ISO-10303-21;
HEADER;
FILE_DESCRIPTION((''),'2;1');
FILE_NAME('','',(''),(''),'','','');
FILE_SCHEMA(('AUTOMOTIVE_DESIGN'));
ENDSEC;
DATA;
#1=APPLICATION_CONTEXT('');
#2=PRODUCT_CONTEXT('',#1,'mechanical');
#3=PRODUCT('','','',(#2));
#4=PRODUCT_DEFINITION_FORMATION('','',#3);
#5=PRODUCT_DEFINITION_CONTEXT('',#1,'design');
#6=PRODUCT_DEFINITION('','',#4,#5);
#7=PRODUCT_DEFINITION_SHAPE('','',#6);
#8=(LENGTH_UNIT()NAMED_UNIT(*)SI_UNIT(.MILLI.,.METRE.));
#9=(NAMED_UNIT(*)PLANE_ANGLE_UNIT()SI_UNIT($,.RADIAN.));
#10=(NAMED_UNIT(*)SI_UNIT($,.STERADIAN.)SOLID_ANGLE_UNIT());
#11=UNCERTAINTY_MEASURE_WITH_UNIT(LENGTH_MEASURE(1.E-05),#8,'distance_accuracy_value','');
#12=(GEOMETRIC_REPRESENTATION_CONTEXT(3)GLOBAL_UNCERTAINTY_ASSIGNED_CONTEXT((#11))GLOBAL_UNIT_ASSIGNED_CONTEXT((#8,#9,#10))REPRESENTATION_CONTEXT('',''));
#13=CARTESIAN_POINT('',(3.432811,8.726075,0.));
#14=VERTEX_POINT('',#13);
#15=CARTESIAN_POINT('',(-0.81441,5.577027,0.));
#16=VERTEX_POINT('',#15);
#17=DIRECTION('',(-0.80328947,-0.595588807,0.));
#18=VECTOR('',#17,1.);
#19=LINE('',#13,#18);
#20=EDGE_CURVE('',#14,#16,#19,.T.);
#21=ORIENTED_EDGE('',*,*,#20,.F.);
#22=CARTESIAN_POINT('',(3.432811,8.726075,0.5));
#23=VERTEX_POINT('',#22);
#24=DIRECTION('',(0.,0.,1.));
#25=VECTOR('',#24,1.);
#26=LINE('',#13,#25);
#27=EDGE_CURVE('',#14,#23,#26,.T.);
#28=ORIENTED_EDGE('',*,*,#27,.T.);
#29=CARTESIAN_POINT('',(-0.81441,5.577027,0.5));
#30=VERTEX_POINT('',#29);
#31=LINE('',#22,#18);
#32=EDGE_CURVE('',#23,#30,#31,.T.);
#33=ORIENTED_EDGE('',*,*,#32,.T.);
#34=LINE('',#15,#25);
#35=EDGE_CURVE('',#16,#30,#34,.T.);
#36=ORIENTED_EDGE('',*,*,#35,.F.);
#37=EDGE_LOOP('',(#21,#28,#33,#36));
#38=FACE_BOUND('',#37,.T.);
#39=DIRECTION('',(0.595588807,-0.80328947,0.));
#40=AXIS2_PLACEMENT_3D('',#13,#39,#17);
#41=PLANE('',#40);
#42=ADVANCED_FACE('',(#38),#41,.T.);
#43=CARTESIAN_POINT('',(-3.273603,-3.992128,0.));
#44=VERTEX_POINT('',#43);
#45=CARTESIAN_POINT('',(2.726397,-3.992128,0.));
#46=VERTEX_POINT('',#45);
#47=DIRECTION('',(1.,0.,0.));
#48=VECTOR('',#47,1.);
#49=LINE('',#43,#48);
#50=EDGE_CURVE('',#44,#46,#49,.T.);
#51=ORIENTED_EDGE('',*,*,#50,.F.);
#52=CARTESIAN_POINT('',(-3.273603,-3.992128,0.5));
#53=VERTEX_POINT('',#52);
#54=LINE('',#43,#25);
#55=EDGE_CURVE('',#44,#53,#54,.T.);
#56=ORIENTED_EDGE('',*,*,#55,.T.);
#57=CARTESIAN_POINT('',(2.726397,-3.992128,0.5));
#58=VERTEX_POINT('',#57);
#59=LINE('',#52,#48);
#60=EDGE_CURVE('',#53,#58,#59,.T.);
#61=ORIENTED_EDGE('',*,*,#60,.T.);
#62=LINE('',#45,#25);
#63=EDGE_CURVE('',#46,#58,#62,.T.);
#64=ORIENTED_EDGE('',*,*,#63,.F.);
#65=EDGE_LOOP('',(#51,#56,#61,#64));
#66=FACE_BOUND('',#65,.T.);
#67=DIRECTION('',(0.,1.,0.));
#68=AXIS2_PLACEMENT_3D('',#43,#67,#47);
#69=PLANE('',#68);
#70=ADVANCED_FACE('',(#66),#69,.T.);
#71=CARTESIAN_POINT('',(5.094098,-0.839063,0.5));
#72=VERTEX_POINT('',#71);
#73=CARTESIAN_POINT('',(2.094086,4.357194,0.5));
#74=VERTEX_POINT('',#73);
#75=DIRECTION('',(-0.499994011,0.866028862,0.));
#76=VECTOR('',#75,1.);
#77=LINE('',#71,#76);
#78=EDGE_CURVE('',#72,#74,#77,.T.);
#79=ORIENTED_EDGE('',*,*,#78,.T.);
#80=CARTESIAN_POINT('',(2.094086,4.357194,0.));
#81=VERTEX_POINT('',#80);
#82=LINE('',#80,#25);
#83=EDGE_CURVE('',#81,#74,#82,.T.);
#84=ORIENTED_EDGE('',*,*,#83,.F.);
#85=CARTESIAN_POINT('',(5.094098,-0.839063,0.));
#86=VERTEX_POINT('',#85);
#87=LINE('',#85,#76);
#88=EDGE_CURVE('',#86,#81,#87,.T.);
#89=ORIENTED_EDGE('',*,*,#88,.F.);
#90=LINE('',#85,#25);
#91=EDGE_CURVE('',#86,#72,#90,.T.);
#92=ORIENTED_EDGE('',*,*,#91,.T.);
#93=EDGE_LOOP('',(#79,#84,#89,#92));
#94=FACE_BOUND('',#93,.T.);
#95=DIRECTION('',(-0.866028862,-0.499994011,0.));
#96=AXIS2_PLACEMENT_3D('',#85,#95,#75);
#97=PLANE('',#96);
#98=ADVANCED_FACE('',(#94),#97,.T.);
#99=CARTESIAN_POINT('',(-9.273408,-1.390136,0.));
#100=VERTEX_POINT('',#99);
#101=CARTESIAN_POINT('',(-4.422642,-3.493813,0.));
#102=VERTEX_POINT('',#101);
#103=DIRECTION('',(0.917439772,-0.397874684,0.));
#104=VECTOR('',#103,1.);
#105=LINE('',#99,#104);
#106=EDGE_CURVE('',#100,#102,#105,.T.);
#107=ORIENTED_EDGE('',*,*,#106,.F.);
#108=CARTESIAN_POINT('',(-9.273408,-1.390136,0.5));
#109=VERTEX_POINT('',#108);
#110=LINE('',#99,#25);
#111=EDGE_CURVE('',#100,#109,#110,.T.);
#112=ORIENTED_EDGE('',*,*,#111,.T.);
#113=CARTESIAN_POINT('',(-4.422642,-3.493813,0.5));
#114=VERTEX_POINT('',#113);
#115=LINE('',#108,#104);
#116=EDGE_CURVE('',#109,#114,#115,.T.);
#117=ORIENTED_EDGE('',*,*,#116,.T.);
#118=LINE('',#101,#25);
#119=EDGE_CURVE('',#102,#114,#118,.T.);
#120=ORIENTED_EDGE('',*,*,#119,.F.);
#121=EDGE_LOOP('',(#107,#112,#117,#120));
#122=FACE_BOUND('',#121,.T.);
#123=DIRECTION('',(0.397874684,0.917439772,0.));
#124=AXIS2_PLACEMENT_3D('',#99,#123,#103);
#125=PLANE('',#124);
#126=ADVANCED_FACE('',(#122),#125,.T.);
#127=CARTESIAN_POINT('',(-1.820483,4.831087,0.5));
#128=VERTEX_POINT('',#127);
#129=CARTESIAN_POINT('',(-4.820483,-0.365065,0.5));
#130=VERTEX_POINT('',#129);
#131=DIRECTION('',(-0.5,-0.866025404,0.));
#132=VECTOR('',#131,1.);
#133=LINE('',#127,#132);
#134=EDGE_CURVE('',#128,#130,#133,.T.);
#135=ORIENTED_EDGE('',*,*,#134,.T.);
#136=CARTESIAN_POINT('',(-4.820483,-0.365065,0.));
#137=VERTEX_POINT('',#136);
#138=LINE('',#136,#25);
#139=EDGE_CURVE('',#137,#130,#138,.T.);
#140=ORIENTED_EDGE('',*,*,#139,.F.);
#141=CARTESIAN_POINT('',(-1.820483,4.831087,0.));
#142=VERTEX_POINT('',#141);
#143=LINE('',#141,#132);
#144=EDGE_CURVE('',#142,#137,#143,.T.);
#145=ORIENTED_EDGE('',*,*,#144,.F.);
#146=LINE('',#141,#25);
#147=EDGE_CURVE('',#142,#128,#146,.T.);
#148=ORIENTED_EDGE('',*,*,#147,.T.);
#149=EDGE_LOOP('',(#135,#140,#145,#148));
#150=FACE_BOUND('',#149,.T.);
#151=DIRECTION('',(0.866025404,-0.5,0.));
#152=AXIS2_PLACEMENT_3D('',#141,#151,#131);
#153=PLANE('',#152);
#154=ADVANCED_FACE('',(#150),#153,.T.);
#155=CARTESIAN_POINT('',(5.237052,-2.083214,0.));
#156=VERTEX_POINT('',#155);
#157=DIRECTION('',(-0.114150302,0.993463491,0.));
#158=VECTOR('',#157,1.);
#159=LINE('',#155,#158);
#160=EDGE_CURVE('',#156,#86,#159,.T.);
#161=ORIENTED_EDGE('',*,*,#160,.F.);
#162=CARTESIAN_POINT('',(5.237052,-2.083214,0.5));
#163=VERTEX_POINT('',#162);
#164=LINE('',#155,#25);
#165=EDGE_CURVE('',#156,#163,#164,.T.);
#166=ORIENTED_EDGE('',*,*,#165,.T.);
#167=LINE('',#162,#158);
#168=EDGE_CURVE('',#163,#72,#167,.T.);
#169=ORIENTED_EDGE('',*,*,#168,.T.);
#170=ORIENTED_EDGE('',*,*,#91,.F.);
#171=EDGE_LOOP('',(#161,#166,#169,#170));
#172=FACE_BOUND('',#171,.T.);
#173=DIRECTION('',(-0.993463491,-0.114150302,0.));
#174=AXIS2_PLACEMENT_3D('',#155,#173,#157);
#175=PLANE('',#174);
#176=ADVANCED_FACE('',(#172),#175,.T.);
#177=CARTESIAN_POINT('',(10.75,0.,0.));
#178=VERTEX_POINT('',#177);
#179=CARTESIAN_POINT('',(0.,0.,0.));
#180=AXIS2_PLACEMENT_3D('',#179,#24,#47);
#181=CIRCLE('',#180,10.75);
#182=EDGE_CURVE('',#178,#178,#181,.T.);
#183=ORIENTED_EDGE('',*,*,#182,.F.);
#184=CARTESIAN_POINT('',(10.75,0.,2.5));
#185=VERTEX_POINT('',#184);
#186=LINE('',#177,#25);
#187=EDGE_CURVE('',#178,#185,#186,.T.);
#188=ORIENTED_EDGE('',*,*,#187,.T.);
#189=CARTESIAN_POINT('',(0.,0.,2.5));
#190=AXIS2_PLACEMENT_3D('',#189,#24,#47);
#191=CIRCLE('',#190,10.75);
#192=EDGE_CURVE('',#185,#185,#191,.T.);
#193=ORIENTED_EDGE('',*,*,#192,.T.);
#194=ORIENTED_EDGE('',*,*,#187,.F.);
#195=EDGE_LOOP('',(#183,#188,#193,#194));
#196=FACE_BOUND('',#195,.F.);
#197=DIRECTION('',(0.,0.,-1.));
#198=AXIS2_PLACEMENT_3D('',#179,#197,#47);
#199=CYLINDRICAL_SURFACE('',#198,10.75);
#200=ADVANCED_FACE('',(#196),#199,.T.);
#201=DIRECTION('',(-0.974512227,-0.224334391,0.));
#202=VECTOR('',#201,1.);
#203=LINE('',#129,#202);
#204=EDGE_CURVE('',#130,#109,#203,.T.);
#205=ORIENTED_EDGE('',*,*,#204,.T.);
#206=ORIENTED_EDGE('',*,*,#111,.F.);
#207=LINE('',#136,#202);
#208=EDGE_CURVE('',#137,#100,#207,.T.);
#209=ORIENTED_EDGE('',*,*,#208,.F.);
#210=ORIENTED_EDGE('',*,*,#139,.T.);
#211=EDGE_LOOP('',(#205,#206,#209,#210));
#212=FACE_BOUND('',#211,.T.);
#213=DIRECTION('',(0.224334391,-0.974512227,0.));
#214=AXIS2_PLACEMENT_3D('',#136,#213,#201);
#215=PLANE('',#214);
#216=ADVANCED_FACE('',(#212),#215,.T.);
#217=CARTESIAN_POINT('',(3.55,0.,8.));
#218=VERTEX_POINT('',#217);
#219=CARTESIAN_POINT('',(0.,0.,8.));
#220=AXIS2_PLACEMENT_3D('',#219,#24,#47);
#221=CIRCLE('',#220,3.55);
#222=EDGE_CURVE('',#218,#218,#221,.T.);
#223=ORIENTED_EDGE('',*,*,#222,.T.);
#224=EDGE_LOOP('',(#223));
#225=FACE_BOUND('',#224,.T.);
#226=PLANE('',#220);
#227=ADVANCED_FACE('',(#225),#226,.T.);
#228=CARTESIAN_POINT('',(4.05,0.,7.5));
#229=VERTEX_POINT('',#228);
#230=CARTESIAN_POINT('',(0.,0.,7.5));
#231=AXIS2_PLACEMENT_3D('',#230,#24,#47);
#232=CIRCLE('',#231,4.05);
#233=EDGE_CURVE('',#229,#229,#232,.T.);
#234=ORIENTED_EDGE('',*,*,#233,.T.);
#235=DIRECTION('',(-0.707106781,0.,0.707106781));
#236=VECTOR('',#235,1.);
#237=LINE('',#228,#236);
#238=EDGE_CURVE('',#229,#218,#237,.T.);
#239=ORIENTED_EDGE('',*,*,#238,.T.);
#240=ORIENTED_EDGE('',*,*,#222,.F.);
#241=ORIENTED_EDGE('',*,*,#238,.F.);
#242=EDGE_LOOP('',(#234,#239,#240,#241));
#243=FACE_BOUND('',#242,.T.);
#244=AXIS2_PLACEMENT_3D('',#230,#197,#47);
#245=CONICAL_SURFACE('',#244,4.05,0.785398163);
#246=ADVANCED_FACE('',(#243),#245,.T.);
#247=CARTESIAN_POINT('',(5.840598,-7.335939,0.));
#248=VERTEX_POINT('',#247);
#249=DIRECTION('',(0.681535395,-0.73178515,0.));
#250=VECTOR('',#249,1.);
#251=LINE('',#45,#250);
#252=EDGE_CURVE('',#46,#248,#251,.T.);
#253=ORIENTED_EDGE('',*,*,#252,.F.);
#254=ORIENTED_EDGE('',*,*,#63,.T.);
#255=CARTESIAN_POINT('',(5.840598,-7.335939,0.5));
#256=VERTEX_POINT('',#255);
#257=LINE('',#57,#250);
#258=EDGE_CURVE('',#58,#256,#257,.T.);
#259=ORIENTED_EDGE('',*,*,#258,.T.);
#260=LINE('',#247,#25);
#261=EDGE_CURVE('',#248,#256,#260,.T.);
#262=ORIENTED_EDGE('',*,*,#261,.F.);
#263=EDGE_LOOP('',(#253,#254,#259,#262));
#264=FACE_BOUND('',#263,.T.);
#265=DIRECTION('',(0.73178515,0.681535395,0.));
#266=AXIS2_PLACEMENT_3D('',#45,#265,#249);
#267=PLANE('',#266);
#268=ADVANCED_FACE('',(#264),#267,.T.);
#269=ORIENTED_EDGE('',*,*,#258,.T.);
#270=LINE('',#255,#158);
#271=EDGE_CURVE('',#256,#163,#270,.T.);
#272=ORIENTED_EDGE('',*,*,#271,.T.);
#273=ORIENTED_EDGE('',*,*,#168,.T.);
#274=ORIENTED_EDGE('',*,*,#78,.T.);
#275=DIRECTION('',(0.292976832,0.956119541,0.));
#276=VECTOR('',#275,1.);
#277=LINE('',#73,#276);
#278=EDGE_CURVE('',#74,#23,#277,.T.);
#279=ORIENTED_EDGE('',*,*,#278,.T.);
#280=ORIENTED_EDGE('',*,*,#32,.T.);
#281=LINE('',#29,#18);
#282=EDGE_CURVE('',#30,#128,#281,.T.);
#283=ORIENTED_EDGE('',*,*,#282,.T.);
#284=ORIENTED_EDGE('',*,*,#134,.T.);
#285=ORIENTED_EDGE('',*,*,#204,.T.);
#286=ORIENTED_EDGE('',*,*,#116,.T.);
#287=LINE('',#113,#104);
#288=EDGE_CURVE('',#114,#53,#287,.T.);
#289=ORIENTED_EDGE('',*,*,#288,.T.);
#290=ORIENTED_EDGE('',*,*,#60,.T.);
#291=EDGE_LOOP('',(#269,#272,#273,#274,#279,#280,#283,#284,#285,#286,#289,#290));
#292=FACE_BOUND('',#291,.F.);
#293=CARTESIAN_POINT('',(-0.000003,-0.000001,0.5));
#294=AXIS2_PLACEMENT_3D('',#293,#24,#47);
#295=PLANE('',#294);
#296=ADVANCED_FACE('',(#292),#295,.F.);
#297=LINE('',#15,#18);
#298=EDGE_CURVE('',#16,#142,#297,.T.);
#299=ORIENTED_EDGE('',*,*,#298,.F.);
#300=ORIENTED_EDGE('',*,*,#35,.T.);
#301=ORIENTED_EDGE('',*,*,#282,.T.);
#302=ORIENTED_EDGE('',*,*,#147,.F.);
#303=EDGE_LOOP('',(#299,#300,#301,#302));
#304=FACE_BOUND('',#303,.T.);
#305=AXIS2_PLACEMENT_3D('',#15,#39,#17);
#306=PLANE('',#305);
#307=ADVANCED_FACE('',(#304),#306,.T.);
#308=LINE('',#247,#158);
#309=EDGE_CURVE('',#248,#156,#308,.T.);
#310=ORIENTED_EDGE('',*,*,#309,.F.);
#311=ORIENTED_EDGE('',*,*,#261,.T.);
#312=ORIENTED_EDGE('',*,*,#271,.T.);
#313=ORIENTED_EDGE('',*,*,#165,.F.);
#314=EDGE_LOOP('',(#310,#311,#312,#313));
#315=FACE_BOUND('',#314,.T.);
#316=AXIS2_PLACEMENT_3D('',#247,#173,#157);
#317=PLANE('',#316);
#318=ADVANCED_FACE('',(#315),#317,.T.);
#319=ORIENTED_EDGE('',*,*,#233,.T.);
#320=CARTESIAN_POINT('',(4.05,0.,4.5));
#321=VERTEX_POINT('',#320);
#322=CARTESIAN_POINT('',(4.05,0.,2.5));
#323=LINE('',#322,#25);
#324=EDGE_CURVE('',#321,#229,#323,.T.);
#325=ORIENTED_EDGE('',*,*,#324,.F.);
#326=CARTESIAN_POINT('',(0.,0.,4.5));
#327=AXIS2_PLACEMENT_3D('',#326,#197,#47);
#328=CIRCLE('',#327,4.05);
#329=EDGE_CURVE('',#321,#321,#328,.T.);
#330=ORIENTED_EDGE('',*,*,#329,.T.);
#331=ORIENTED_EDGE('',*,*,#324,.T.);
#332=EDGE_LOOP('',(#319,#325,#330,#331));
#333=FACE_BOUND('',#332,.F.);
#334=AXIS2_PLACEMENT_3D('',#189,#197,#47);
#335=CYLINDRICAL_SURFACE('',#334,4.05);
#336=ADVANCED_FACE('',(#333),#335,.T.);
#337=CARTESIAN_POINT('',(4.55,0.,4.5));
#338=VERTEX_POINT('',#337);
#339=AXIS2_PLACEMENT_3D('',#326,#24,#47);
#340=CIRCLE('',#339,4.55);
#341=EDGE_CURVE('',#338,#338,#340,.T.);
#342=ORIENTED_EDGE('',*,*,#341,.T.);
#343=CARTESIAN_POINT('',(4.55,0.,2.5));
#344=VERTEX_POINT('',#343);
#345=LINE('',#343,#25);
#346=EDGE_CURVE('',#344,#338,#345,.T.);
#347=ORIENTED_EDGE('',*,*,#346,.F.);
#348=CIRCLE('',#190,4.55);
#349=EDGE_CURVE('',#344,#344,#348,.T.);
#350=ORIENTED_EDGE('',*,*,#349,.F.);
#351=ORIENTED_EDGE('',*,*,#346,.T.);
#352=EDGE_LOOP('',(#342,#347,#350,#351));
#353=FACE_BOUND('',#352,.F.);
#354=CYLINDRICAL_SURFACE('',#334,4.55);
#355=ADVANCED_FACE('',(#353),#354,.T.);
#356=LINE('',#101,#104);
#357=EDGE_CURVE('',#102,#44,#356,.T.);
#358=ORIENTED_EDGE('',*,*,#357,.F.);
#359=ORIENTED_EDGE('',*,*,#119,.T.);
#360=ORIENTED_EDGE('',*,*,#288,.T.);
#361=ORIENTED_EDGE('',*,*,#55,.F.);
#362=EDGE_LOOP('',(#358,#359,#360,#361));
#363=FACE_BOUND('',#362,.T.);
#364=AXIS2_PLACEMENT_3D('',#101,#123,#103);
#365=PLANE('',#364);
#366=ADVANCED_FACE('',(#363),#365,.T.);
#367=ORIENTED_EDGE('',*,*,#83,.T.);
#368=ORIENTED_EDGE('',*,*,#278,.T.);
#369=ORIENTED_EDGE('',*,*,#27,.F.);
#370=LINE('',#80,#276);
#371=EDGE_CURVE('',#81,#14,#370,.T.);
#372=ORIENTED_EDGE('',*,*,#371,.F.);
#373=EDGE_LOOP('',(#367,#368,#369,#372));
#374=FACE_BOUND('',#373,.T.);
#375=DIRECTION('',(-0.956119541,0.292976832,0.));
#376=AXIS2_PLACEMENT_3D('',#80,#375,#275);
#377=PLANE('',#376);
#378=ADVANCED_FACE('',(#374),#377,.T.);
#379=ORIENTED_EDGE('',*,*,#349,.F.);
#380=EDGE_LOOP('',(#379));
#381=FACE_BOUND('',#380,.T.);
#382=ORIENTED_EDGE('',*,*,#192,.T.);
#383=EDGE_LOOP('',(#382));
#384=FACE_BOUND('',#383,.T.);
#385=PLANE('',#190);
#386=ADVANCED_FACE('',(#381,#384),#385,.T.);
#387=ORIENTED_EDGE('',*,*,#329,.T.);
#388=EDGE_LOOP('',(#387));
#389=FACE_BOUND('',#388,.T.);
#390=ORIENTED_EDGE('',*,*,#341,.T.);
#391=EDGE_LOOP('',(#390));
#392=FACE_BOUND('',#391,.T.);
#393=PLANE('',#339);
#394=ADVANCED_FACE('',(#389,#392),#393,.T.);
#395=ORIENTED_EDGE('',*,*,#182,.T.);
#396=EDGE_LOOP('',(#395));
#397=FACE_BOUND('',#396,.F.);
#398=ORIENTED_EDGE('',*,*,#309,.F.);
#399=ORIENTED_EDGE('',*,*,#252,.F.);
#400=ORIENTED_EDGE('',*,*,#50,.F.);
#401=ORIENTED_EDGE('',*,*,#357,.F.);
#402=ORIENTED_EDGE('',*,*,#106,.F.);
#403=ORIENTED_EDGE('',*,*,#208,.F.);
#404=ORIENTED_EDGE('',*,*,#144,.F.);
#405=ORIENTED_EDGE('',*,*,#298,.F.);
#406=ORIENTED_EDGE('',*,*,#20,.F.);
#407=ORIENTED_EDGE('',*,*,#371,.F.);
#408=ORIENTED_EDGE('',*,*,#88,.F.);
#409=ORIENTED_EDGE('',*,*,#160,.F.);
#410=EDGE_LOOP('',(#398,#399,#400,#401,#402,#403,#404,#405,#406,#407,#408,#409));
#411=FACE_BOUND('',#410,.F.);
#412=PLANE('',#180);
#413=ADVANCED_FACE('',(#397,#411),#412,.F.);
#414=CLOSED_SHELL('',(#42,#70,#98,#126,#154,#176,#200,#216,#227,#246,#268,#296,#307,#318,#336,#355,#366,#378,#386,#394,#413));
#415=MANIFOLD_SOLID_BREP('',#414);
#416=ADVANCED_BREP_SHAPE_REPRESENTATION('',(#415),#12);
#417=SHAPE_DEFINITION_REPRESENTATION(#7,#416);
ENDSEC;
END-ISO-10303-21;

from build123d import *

# Parameters (mm, degrees)
F0_R     = 10.75
F0_R_2   = 10
F1_DEPTH = 2.5
F2_R     = 4.05
F3_DEPTH = 5.5
F4_SIZE  = 0.5
F5_R     = 4.55
F6_DEPTH = 2
F7_DEPTH = 0.5


# Not quite as in the source:
# - a feature names something its author has since deleted; it is built from what else it names


with BuildPart() as f1:
    # F0 (on Top) → F1 (new body)
    with BuildSketch(Plane.XY):
        Circle(F0_R)
        Circle(F0_R_2, mode=Mode.SUBTRACT)
        Circle(F0_R_2)
        Polygon((-0.8144098687, 5.5770273648), (3.432810713, 8.7260752933), (2.0940857055, 4.3571935282), (5.0940976108, -0.8390625077), (5.23705231, -2.0832140472), (5.8405975225, -7.3359389308), (2.7263974316, -3.992128183), (-3.2736025686, -3.992128183), (-4.4226424415, -3.4938133181), (-9.2734082358, -1.3901363628), (-4.8204831373, -0.3650653455), (-1.8204831373, 4.8310870772), align=None, mode=Mode.SUBTRACT)
        Polygon((2.0940857055, 4.3571935282), (3.432810713, 8.7260752933), (-0.8144098687, 5.5770273648), (-1.8204831373, 4.8310870772), (-4.8204831373, -0.3650653455), (-9.2734082358, -1.3901363628), (-4.4226424415, -3.4938133181), (-3.2736025686, -3.992128183), (2.7263974316, -3.992128183), (5.8405975225, -7.3359389308), (5.23705231, -2.0832140472), (5.0940976108, -0.8390625077), align=None)
    extrude(amount=F1_DEPTH)

    # F2 (on face) → F3 (join)
    with BuildSketch(Plane.XY.offset(2.5)):
        Circle(F2_R)
    extrude(amount=F3_DEPTH)

    # F4
    f4_edges = [f1.edges().sort_by_distance(p)[0] for p in [
        (-4.05, 0, 8),
    ]]
    chamfer(f4_edges, length=F4_SIZE)

    # F5 (on face) → F6 (join)
    with BuildSketch(Plane.XY.offset(2.5)):
        Circle(F5_R)
    extrude(amount=F6_DEPTH)

    # F0 (on Top) → F7 (cut)
    with BuildSketch(Plane.XY):
        Polygon((2.0940857055, 4.3571935282), (3.432810713, 8.7260752933), (-0.8144098687, 5.5770273648), (-1.8204831373, 4.8310870772), (-4.8204831373, -0.3650653455), (-9.2734082358, -1.3901363628), (-4.4226424415, -3.4938133181), (-3.2736025686, -3.992128183), (2.7263974316, -3.992128183), (5.8405975225, -7.3359389308), (5.23705231, -2.0832140472), (5.0940976108, -0.8390625077), align=None)
    extrude(amount=F7_DEPTH, mode=Mode.SUBTRACT)


solid = f1.part
